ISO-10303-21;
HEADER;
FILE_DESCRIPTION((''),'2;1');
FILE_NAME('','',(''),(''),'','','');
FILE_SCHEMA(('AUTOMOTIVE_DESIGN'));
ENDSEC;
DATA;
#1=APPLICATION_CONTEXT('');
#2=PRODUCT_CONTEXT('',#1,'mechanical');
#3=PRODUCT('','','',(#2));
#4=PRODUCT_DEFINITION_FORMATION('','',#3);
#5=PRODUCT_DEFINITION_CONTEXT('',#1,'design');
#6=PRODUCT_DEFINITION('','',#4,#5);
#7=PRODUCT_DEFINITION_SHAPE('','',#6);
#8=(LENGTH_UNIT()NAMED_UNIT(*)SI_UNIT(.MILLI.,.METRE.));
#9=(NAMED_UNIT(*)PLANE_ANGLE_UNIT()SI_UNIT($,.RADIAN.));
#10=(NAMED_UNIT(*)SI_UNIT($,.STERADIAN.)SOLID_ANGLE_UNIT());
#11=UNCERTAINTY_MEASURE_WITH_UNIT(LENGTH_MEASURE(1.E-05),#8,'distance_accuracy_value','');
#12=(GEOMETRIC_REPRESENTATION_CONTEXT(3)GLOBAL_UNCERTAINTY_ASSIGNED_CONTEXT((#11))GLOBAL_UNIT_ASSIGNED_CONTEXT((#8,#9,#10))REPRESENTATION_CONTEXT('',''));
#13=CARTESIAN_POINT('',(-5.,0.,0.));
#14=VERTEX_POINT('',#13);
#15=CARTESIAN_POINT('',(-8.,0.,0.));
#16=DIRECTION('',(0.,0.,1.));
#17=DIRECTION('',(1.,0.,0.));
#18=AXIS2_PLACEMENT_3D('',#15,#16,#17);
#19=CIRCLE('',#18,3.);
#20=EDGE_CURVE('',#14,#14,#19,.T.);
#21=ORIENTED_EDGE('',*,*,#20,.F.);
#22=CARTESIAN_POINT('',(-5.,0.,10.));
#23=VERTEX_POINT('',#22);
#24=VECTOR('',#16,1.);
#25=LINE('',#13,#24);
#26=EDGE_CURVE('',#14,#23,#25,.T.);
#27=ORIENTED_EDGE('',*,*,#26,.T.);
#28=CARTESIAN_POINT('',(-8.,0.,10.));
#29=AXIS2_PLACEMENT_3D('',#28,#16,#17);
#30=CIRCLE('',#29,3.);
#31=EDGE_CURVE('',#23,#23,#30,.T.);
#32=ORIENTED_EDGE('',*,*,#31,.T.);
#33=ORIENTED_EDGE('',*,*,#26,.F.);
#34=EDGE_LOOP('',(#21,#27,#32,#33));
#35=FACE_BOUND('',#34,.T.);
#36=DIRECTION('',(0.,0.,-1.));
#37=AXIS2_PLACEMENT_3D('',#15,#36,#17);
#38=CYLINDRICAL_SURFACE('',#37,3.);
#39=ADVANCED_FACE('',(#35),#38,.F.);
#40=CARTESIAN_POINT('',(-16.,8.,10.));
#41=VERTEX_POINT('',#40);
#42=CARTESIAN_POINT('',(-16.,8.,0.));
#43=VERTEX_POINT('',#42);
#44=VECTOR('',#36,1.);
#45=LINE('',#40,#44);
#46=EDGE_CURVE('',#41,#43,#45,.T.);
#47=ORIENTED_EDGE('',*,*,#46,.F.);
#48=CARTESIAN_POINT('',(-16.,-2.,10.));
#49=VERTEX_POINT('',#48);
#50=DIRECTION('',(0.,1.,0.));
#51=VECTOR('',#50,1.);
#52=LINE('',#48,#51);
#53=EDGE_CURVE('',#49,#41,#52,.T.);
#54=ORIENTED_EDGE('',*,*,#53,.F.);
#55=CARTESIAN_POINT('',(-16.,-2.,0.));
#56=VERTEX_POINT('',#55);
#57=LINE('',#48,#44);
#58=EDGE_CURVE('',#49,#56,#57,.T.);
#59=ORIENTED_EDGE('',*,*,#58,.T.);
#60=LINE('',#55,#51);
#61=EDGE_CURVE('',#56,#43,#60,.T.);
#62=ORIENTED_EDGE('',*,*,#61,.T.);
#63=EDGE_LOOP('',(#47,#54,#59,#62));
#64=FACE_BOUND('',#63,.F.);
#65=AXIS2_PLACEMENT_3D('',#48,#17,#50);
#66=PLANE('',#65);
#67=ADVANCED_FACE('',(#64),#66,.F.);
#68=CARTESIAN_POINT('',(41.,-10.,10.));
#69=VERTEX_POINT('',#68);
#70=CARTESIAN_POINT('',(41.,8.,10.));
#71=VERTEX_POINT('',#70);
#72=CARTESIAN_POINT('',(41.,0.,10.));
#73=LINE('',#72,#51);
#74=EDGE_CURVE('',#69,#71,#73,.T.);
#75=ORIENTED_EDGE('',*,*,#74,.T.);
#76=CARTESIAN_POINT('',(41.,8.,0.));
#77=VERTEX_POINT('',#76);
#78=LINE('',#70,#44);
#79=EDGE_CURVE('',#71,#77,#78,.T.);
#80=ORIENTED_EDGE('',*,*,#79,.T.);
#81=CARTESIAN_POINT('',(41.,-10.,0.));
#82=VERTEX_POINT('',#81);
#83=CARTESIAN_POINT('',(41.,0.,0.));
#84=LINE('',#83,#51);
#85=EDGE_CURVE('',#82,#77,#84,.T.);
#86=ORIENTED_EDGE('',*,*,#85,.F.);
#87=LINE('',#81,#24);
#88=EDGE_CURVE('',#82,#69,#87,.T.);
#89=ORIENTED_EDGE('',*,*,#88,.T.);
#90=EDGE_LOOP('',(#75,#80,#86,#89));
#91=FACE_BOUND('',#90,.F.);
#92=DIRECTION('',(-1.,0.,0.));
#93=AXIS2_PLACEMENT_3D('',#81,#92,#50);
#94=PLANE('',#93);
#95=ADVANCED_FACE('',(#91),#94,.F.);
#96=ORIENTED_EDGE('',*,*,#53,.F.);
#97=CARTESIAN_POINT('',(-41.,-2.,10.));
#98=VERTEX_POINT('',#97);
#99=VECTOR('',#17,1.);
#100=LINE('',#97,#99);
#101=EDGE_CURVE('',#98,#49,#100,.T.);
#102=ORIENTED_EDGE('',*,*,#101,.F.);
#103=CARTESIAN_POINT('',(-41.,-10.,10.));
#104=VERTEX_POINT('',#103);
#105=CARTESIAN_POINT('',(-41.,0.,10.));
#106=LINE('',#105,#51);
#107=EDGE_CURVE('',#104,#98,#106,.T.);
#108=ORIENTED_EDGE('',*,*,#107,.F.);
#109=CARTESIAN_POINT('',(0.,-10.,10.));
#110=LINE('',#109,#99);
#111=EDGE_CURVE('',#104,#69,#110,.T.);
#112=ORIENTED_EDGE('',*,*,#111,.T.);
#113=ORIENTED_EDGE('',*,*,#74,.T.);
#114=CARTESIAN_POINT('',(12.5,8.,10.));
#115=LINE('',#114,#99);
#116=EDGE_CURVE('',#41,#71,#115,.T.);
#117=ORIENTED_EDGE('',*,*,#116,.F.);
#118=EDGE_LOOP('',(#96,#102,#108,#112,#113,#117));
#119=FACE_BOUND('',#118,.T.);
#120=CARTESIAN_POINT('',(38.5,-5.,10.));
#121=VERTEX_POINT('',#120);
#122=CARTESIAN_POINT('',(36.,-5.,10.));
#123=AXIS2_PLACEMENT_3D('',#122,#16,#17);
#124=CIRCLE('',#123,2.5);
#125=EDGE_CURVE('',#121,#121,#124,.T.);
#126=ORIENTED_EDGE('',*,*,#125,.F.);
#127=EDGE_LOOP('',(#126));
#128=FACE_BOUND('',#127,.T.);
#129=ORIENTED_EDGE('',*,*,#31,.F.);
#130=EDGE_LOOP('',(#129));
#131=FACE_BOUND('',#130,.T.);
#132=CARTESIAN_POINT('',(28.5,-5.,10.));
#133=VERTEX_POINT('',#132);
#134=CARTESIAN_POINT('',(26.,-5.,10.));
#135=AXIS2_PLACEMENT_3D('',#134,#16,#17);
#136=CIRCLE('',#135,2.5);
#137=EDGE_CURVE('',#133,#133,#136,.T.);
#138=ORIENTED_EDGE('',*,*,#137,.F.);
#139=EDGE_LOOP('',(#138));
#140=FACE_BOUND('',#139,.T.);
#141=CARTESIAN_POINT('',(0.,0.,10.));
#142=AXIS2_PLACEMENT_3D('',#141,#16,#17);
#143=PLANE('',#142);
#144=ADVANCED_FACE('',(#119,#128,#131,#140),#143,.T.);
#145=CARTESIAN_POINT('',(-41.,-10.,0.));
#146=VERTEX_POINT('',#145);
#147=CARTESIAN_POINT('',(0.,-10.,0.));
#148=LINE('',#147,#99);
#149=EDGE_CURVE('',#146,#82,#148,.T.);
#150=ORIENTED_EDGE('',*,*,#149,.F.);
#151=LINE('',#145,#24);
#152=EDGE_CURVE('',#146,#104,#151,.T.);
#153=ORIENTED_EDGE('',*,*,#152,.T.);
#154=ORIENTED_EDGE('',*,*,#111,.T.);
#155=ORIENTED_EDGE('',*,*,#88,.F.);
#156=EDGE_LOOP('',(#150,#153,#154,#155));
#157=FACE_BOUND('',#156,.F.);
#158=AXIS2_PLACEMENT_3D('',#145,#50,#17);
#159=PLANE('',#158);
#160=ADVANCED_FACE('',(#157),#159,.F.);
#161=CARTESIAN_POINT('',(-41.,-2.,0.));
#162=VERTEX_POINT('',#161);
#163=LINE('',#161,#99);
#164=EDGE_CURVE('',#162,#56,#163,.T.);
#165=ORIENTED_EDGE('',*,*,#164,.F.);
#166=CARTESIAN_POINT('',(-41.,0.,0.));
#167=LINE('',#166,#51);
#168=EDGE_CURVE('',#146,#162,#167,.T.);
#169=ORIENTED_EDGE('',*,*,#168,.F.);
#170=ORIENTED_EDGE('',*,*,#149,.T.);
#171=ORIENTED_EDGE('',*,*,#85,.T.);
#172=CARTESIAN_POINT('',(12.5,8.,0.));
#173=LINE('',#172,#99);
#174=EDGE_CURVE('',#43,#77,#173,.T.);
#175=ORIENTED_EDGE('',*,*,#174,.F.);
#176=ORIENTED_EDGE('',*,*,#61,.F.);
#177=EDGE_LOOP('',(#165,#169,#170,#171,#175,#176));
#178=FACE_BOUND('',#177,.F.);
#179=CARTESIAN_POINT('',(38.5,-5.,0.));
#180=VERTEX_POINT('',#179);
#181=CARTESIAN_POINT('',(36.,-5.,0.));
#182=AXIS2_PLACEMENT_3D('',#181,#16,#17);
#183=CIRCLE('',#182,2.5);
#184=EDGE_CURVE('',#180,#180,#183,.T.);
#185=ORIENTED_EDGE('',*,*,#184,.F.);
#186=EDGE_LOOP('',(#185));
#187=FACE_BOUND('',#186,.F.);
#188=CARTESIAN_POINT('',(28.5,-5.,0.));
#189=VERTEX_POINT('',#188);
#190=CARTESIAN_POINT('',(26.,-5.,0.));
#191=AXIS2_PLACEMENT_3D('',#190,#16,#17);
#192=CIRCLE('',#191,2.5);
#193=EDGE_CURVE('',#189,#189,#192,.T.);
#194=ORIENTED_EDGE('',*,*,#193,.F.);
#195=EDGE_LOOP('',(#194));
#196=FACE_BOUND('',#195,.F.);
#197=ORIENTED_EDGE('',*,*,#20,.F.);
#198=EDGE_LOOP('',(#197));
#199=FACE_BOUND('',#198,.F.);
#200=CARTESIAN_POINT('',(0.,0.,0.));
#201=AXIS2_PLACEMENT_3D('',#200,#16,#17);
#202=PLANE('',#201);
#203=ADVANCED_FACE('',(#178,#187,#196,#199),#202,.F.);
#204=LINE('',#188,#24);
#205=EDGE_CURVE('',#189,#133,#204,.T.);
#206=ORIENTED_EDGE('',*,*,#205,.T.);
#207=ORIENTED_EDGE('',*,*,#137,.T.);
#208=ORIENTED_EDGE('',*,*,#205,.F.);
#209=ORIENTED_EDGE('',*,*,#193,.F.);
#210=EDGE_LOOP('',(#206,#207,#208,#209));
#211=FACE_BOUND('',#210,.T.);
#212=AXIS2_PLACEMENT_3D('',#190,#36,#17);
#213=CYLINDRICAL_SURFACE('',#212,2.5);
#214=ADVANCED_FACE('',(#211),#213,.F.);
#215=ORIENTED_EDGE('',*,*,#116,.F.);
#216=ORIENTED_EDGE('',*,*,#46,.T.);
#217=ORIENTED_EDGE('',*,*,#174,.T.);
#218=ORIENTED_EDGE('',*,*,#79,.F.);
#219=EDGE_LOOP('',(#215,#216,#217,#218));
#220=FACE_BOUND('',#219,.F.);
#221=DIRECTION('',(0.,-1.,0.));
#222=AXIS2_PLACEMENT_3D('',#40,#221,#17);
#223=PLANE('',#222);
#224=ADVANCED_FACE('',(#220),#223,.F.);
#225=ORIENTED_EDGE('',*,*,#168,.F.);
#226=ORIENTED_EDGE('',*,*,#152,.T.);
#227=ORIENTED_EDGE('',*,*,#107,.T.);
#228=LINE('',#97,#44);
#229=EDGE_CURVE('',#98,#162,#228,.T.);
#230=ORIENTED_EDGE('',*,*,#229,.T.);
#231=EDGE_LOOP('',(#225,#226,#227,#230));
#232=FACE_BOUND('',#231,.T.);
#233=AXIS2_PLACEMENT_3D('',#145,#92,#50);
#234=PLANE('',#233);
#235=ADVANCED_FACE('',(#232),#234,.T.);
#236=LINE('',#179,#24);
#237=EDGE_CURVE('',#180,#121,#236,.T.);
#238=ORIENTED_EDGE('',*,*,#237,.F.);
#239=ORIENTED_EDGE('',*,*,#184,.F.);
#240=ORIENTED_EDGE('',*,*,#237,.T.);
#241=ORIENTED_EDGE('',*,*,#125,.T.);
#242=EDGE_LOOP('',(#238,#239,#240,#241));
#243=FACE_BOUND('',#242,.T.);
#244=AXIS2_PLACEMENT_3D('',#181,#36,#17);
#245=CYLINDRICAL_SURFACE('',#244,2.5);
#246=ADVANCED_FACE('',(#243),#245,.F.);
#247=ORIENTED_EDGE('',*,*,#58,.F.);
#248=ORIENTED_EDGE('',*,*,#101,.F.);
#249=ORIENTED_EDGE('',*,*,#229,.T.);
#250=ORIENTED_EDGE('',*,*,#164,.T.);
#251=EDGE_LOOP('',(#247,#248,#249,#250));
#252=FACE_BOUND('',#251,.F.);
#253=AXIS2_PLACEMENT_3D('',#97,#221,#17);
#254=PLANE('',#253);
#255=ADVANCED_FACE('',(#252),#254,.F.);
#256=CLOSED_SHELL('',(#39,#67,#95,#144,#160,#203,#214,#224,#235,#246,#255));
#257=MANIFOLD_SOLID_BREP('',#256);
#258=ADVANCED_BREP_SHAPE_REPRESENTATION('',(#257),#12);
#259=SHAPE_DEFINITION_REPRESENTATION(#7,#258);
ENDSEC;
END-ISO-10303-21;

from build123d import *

# Parameters (mm, degrees)
F0_W     = 82
F0_H     = 20
F0_R     = 2.5
F0_R_2   = 3
F1_DEPTH = 10
F2_W     = 57
F2_H     = 2
F3_DEPTH = 10


# Not quite as in the source:
# - a feature names something its author has since deleted; it is built from what else it names


with BuildPart() as f1:
    # F0 (on Top) → F1 (new body)
    with BuildSketch(Plane.XY):
        Rectangle(F0_W, F0_H)
        with Locations((26, -5)):
            Circle(F0_R, mode=Mode.SUBTRACT)
        with Locations((36, -5)):
            Circle(F0_R, mode=Mode.SUBTRACT)
        with Locations((-8, 0)):
            Circle(F0_R_2, mode=Mode.SUBTRACT)
    extrude(amount=F1_DEPTH)

    # F2 (on face) → F3 (cut)
    with BuildSketch(Plane.XY.offset(10)):
        Polygon((-16, 10), (-41, 10), (-41, -2), (-16, -2), (-16, 8), align=None)
        with Locations((12.5, 9)):
            Rectangle(F2_W, F2_H)
    extrude(amount=-F3_DEPTH, mode=Mode.SUBTRACT)


solid = f1.part
